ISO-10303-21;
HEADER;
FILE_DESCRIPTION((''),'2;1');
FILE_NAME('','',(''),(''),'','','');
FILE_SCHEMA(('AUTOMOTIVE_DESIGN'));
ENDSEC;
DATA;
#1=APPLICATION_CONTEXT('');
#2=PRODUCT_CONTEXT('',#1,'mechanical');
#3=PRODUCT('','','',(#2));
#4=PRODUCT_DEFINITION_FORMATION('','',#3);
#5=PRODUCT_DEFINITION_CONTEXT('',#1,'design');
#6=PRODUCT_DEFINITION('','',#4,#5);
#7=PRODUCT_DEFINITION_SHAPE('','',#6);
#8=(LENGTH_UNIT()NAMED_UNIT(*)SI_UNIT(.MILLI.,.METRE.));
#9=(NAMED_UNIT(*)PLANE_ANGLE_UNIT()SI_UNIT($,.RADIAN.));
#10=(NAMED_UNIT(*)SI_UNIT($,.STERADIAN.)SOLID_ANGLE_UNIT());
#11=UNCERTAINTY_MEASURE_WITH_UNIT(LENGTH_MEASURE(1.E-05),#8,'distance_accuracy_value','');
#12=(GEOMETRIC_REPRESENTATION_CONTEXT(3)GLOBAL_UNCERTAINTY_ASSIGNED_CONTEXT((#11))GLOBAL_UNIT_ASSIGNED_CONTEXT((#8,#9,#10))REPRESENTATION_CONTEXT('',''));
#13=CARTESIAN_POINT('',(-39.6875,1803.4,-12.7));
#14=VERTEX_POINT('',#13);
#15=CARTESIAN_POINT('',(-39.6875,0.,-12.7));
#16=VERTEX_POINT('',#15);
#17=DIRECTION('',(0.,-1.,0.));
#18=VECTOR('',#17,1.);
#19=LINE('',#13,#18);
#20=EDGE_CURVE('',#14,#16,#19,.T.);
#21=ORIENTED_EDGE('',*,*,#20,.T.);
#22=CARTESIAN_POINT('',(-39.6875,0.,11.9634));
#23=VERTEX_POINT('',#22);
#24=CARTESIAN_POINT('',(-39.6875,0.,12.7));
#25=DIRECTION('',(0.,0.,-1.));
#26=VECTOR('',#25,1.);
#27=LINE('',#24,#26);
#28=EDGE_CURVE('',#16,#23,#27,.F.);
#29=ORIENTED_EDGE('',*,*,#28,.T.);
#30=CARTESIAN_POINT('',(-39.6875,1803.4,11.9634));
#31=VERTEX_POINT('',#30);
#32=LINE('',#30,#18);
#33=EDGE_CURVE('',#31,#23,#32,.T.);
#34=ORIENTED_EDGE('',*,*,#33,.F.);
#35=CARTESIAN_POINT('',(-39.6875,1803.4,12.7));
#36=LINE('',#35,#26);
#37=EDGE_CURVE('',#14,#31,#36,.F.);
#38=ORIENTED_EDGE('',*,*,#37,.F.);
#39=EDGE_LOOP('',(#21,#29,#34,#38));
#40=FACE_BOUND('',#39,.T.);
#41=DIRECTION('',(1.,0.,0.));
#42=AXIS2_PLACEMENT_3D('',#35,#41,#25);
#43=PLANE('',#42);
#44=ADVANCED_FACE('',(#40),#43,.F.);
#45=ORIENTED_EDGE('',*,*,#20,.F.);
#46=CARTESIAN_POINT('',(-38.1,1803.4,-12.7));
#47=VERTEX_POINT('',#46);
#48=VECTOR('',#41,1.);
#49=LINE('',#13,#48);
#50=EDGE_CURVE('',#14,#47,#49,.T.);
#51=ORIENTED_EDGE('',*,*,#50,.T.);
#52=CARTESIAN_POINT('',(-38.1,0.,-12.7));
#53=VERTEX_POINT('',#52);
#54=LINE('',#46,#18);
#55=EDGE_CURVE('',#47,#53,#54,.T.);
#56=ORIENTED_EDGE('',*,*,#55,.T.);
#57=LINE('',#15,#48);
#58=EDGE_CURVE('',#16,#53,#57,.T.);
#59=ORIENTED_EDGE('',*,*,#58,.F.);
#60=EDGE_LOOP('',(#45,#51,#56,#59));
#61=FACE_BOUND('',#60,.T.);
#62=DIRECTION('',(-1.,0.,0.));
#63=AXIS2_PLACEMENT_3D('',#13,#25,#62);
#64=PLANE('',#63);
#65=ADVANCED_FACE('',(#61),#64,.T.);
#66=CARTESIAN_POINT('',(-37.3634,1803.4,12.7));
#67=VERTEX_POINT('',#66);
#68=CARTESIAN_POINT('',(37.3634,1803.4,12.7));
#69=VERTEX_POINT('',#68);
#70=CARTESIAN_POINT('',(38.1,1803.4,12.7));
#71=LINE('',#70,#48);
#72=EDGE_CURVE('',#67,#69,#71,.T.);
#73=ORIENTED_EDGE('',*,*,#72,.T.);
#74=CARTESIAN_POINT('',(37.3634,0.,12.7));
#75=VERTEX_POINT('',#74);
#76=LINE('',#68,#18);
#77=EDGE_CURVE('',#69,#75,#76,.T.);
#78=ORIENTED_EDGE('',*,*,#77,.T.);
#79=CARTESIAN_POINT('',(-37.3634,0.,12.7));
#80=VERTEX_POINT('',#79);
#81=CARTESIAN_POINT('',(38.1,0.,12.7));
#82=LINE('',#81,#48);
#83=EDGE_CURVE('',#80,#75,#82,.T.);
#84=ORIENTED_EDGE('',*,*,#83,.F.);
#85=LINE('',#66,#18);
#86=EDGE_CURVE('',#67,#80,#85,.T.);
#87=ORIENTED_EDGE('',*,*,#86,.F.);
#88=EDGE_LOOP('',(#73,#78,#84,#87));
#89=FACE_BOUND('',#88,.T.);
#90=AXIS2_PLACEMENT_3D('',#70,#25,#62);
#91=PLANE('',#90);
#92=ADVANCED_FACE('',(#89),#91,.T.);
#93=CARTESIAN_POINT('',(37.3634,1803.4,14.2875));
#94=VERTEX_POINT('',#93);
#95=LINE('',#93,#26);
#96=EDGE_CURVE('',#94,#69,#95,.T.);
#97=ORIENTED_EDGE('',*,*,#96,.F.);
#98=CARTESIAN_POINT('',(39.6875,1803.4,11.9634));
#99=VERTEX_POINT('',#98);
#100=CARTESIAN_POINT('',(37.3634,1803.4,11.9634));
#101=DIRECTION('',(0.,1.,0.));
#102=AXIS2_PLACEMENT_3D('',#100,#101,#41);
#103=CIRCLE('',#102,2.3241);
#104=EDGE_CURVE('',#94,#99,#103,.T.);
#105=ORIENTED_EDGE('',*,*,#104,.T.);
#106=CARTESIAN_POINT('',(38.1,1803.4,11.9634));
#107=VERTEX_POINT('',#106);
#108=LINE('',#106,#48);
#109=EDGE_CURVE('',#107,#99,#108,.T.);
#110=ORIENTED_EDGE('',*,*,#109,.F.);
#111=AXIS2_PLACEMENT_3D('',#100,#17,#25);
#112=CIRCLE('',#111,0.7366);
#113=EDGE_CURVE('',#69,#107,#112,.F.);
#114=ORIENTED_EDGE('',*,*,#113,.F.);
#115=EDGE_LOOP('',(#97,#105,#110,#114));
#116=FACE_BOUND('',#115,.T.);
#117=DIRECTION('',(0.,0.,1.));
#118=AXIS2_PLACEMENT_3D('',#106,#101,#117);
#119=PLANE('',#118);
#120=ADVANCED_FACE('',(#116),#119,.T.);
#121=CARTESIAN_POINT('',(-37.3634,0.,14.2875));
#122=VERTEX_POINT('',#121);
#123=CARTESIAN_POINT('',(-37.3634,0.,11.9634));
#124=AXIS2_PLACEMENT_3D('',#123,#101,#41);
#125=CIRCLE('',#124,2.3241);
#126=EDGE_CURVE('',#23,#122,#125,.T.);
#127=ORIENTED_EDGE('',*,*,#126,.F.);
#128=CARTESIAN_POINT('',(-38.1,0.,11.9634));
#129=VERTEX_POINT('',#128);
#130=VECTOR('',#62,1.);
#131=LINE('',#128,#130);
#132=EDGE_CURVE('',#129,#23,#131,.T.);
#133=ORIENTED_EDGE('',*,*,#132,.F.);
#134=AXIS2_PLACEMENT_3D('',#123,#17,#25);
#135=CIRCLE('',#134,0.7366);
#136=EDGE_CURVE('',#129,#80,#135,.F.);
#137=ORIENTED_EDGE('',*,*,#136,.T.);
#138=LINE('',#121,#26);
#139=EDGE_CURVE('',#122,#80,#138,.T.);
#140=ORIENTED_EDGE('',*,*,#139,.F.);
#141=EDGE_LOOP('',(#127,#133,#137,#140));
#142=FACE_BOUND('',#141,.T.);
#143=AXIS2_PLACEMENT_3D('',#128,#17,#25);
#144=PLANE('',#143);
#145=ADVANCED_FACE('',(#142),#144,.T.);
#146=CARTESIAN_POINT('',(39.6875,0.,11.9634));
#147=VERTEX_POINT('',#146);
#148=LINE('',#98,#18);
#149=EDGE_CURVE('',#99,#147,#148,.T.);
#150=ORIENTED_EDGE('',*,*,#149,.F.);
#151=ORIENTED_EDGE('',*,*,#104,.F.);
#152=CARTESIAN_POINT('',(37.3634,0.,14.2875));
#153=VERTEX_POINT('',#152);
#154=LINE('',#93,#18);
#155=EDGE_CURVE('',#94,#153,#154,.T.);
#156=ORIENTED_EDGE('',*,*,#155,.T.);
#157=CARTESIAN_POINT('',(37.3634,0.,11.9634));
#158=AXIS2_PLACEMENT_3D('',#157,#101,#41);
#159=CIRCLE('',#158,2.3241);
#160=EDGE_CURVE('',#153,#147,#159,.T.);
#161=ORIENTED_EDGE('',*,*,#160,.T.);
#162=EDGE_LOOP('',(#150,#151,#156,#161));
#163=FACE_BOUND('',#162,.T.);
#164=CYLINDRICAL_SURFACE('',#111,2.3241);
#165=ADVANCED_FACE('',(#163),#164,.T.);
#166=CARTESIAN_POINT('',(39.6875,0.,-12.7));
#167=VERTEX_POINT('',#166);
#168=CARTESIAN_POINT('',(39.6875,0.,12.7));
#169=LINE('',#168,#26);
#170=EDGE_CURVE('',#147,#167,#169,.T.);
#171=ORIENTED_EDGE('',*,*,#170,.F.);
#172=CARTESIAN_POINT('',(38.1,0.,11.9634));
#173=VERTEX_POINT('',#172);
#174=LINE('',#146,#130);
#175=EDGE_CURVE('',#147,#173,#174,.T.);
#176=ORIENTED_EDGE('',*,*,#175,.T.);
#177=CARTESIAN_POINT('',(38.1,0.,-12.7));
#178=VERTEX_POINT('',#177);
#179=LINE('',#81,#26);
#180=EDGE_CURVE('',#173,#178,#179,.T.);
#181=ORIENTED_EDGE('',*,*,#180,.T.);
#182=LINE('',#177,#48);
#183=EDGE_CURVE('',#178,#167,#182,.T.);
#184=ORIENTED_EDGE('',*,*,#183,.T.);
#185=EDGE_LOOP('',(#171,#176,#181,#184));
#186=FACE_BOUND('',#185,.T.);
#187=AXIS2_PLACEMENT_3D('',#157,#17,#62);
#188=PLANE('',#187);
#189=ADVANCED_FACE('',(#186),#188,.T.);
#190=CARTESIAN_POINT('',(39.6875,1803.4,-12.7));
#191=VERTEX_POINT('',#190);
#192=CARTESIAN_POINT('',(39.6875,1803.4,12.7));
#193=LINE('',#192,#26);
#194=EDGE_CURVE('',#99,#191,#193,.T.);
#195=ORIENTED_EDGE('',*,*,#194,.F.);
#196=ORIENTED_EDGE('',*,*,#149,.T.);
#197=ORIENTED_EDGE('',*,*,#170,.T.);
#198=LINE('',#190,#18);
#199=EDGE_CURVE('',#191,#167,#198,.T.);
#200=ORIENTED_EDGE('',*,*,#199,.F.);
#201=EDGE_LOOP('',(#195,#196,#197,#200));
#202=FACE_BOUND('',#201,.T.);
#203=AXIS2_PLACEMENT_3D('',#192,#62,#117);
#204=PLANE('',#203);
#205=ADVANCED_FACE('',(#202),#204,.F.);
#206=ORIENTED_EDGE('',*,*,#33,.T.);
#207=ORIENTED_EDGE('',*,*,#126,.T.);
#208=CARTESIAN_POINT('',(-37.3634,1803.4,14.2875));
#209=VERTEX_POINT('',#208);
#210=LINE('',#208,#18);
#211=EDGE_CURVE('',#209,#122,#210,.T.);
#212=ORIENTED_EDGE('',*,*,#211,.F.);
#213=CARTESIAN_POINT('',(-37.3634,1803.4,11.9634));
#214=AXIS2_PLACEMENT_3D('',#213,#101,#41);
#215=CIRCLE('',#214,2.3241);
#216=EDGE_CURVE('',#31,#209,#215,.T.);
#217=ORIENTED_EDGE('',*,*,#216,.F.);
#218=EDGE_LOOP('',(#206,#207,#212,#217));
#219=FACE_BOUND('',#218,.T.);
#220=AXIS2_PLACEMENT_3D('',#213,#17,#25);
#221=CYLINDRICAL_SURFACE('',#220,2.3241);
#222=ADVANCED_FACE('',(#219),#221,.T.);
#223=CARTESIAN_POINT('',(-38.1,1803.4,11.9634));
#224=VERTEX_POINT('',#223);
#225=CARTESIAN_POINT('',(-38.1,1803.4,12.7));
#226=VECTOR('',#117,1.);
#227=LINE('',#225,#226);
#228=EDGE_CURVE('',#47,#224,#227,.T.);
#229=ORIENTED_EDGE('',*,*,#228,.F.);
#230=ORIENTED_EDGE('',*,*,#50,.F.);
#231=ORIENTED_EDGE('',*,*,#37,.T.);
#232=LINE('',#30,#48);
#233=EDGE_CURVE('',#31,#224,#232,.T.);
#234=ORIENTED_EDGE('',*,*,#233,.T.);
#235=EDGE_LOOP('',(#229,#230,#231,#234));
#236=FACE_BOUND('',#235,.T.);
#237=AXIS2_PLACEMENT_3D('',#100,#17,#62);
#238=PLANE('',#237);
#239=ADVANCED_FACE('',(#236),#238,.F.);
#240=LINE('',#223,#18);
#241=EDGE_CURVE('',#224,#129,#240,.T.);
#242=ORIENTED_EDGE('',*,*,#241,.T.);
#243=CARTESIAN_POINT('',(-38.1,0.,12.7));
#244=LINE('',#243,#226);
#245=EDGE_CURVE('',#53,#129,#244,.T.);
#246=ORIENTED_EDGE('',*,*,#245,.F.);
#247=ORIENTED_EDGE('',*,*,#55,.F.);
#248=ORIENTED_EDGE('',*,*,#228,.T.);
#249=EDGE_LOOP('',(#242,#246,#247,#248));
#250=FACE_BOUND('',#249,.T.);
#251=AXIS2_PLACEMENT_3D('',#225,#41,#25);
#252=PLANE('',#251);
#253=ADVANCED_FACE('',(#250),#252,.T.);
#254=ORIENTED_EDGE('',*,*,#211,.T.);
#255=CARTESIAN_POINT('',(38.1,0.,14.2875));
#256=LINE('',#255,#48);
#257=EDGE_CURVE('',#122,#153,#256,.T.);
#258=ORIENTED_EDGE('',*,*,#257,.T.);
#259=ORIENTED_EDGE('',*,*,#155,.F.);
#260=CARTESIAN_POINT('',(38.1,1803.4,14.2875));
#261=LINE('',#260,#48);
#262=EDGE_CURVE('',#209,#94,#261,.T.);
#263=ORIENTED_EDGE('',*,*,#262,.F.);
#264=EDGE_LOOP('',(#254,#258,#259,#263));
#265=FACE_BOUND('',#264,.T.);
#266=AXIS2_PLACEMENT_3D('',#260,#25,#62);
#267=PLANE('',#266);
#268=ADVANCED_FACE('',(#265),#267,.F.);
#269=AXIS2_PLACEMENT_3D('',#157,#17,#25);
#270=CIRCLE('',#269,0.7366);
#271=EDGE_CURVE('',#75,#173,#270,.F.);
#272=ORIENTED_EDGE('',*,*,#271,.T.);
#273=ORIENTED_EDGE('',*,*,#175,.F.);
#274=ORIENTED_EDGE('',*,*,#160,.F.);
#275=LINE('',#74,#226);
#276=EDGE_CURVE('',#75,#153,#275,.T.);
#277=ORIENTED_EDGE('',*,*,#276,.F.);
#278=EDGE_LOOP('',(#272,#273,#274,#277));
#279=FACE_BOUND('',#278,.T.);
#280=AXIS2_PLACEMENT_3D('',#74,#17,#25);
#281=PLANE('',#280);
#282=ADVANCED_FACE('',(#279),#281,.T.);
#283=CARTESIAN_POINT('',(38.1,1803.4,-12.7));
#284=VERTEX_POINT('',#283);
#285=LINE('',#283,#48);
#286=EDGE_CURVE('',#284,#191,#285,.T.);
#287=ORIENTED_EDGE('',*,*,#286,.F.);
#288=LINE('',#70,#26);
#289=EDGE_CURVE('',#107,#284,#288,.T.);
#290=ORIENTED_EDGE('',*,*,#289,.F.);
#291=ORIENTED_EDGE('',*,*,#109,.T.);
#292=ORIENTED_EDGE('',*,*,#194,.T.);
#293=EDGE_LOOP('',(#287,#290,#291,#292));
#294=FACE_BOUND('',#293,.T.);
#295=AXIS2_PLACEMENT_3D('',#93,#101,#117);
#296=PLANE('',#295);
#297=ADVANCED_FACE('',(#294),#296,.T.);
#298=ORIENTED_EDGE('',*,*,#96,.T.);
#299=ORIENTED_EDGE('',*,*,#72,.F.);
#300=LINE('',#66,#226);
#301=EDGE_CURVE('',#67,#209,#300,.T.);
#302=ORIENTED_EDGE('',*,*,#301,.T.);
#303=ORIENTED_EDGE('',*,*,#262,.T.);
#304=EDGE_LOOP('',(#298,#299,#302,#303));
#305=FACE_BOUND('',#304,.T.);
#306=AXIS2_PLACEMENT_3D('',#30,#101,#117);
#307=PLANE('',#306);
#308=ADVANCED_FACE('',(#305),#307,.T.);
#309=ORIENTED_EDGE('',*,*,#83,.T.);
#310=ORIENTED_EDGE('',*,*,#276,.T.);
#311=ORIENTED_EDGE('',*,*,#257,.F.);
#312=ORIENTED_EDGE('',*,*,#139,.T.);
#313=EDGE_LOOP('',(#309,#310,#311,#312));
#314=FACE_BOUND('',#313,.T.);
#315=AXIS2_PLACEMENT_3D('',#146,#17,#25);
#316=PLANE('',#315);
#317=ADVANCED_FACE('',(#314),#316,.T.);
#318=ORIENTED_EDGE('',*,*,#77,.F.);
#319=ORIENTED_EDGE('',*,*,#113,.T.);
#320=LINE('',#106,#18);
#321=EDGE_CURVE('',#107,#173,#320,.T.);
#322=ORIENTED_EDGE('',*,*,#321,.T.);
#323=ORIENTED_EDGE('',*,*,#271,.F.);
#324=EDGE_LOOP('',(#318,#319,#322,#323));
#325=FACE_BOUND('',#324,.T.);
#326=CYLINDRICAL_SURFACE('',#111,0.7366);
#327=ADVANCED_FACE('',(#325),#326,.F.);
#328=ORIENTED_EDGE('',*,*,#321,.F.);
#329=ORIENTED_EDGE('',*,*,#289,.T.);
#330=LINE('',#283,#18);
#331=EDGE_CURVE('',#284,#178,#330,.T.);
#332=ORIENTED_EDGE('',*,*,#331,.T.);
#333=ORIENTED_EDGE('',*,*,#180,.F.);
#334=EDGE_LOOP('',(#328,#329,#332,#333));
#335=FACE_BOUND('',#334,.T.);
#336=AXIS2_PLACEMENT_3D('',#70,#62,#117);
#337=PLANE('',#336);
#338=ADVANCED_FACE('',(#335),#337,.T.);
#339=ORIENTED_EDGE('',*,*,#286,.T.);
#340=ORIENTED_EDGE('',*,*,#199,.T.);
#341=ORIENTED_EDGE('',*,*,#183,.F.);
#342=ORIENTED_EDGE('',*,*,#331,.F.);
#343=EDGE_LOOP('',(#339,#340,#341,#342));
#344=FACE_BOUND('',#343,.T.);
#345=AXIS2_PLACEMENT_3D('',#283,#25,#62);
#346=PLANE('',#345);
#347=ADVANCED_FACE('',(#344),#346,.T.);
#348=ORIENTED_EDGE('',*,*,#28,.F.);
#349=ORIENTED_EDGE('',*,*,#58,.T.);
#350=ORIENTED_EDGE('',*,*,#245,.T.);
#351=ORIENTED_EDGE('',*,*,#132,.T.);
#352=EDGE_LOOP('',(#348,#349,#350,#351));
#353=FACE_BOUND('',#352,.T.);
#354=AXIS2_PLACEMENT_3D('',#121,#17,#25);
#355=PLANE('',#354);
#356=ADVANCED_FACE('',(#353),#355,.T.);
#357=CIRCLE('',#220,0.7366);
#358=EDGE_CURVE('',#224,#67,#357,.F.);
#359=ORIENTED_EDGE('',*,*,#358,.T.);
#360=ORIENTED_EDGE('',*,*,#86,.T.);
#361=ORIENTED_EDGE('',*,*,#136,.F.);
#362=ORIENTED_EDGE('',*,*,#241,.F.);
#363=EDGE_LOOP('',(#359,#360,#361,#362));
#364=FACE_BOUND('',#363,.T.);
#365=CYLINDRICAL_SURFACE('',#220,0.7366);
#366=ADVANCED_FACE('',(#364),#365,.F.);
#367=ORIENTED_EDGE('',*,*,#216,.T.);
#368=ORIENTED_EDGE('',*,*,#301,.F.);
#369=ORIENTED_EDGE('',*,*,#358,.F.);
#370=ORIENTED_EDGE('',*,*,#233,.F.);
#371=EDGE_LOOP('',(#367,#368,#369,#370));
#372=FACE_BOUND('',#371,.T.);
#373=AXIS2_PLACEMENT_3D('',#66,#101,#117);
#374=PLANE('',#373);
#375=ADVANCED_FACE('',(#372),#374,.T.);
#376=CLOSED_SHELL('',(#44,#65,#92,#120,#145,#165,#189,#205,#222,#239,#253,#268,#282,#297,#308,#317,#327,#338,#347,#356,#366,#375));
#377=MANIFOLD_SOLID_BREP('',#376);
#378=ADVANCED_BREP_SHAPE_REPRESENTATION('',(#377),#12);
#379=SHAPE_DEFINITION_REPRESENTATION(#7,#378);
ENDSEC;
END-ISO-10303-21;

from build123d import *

# Parameters (mm, degrees)
BASE_FLANGE1_DEPTH = 1803.4


# Sheet-metal steps are written as plain solids
with BuildPart() as part:
    # Sketch1 → Base-Flange1 (new body)
    with BuildSketch(Plane(origin=(0, 0, 0), x_dir=(1, 0, 0), z_dir=(0, 1, 0))):
        with BuildLine():
            Line((38.1, 12.7), (38.1, -11.9634))
            ThreePointArc((38.1, -11.9634), (37.884254855, -12.484254855), (37.3634, -12.7))
            Line((37.3634, -12.7), (-37.3634, -12.7))
            ThreePointArc((-37.3634, -12.7), (-37.884254855, -12.484254855), (-38.1, -11.9634))
            Line((-38.1, -11.9634), (-38.1, 12.7))
            Line((-38.1, 12.7), (-39.6875, 12.7))
            Line((-39.6875, 12.7), (-39.6875, -11.9634))
            ThreePointArc((-39.6875, -11.9634), (-39.00678687, -13.60678687), (-37.3634, -14.2875))
            Line((-37.3634, -14.2875), (37.3634, -14.2875))
            ThreePointArc((37.3634, -14.2875), (39.00678687, -13.60678687), (39.6875, -11.9634))
            Line((39.6875, -11.9634), (39.6875, 12.7))
            Line((39.6875, 12.7), (38.1, 12.7))
        make_face()
    extrude(amount=BASE_FLANGE1_DEPTH)


solid = part.part
